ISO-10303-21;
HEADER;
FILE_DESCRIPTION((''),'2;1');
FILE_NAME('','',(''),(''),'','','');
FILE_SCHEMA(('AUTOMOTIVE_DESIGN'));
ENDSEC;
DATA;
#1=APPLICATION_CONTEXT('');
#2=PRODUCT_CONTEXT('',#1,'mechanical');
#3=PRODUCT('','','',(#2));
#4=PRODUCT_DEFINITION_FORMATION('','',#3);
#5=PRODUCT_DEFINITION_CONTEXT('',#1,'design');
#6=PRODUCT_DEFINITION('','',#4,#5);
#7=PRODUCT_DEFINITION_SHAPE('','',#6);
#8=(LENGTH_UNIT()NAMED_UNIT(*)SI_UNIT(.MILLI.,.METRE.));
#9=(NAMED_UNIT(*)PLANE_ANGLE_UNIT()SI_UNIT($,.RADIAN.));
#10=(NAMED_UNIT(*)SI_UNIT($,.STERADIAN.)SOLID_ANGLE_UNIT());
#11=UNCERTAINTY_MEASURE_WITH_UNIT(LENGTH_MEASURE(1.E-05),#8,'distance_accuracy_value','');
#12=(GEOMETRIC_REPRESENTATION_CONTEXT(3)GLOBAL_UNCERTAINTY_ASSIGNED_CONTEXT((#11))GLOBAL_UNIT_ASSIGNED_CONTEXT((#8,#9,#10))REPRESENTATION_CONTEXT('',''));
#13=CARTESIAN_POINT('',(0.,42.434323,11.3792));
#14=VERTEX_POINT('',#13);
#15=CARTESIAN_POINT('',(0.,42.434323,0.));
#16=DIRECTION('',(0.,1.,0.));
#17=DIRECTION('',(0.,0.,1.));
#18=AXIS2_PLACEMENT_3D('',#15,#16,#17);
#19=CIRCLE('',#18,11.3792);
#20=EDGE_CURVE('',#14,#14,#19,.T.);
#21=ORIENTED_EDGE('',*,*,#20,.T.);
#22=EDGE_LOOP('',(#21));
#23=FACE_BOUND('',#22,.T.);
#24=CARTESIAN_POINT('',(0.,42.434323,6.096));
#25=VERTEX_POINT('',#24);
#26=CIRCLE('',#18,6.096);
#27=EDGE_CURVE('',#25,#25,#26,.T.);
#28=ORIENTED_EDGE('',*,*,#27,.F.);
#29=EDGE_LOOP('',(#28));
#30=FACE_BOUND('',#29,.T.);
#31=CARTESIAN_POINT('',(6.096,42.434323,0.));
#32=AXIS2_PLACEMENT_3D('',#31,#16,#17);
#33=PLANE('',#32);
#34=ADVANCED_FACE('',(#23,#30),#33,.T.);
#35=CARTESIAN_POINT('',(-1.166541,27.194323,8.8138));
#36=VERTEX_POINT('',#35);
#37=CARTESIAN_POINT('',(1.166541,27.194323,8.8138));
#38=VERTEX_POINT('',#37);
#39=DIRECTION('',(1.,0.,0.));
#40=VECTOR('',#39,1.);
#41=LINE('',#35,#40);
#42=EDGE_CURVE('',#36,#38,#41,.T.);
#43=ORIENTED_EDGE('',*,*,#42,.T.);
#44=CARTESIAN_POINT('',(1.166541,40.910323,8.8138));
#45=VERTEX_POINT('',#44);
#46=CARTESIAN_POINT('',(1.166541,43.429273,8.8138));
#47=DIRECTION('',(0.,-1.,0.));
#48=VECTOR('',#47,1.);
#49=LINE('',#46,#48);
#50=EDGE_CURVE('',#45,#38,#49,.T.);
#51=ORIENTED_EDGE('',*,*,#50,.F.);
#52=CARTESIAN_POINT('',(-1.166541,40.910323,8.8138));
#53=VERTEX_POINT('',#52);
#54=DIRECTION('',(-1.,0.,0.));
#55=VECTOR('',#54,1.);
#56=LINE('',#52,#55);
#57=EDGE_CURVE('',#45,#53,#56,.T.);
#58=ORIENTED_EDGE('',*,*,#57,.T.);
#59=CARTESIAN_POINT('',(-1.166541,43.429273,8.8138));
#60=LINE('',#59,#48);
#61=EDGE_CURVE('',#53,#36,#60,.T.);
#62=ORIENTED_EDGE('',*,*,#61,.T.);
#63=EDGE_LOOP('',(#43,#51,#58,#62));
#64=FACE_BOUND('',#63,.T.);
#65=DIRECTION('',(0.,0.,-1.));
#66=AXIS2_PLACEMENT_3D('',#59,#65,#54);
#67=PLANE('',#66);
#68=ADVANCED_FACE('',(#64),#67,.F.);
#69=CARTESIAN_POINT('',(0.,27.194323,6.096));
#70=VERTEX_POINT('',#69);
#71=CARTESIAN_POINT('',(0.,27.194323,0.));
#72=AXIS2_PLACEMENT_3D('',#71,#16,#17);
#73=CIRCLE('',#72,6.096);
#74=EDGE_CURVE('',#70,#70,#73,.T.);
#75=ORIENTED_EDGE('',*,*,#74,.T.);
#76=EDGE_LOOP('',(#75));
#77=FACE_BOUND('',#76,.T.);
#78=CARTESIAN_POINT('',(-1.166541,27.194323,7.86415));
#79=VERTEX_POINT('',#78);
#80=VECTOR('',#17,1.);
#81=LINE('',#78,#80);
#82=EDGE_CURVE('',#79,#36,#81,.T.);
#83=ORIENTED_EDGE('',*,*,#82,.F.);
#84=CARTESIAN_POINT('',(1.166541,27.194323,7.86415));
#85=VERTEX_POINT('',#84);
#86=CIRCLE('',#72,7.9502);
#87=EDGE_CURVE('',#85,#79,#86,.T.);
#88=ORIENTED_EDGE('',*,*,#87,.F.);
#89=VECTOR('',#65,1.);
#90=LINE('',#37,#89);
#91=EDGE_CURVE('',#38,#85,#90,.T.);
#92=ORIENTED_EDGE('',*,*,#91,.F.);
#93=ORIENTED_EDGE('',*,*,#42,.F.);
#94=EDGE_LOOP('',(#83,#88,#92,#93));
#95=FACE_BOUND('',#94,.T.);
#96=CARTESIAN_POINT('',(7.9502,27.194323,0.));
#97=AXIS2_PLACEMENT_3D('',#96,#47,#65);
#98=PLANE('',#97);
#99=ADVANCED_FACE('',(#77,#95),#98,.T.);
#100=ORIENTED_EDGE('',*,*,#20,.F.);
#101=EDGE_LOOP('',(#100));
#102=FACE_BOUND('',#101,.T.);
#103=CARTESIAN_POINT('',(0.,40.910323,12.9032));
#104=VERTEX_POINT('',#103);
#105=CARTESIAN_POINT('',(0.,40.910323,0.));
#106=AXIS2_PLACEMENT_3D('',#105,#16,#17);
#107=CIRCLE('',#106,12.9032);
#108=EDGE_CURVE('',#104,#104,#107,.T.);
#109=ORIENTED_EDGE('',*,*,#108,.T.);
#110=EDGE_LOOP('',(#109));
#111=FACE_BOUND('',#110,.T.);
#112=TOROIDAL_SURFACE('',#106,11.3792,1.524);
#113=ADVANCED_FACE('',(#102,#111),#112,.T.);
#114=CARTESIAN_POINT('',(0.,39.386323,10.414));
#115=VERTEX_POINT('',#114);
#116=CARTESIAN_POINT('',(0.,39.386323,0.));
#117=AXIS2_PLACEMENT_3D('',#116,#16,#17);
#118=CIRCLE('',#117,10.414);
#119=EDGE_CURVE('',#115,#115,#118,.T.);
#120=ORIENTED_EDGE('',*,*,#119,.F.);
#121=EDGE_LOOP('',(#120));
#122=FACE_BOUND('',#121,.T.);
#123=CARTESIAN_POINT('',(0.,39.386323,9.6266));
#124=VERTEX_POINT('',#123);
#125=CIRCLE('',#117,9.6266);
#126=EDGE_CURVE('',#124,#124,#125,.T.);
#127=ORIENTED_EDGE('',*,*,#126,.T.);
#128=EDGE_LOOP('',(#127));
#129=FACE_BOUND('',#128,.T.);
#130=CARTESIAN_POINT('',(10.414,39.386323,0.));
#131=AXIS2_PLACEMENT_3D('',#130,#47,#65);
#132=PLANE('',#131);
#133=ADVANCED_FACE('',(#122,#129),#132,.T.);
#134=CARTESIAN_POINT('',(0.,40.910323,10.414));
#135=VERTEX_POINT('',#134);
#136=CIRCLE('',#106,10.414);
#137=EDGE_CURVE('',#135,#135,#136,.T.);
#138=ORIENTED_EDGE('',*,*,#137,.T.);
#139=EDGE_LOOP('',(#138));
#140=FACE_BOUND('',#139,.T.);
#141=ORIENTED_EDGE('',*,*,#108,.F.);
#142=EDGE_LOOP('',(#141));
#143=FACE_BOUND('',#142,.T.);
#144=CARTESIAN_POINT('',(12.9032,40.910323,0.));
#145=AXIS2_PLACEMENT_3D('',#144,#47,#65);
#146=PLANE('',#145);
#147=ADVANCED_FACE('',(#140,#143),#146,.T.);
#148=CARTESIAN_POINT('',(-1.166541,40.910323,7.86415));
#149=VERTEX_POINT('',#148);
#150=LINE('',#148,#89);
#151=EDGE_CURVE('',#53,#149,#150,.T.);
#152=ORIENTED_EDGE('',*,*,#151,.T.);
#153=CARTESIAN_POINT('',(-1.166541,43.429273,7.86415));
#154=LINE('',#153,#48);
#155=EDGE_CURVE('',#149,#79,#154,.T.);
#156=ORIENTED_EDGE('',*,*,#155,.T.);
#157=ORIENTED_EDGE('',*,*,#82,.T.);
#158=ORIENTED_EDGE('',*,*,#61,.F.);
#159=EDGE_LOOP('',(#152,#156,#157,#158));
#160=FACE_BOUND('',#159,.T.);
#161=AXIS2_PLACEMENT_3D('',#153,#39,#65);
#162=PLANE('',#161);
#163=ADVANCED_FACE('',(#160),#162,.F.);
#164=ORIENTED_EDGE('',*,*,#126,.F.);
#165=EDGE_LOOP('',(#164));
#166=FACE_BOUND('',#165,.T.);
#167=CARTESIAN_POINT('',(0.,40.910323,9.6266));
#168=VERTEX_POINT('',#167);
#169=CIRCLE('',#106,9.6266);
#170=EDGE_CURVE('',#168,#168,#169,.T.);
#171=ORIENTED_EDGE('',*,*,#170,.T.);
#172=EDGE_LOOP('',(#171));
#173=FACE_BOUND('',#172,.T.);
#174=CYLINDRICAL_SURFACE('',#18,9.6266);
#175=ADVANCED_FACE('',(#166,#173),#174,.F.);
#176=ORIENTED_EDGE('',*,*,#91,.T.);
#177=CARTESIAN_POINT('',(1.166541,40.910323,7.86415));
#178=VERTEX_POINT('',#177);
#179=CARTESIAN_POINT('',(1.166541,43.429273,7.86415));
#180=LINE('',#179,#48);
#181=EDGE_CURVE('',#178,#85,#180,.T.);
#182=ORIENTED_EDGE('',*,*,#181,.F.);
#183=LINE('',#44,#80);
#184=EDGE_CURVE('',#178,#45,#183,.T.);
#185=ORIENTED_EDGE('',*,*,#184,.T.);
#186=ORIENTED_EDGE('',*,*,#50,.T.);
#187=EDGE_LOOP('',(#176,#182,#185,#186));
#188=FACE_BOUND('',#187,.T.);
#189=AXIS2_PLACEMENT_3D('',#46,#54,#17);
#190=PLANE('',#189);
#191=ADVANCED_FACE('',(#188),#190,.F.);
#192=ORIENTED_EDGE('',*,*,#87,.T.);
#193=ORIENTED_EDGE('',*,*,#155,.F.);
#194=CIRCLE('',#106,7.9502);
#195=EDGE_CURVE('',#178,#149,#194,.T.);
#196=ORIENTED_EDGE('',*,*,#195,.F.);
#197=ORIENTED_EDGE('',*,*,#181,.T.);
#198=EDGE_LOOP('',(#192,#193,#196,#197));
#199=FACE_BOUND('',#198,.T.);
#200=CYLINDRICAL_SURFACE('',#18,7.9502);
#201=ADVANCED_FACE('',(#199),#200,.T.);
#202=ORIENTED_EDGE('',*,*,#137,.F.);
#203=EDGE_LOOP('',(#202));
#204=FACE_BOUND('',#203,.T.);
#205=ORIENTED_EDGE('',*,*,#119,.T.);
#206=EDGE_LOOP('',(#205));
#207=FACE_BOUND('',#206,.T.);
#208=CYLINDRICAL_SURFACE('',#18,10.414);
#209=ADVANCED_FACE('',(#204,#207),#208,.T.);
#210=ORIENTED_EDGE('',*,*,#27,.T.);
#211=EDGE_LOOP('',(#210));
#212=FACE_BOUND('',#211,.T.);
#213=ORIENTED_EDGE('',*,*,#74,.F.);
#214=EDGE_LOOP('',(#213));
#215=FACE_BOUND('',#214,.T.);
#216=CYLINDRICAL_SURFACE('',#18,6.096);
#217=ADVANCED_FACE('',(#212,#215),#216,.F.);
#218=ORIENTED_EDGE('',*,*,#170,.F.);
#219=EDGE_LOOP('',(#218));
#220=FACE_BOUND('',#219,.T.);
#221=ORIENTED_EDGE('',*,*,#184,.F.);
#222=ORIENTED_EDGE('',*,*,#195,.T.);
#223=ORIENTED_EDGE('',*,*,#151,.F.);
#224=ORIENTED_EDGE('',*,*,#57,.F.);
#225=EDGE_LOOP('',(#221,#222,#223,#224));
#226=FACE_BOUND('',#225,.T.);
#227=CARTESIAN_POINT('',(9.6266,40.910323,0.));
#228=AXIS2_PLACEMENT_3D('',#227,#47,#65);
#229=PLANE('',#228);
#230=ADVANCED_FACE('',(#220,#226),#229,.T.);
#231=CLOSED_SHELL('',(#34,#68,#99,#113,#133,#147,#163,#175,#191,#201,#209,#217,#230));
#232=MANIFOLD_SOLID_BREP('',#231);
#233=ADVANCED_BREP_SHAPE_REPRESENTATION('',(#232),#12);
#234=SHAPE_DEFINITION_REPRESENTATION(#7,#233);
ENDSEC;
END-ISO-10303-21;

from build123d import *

# Parameters (mm, degrees)
FILLET1_R           = 1.524
BOSS_EXTRUDE1_START = -13.716
BOSS_EXTRUDE1_DEPTH = 13.716


with BuildPart() as part:
    # Sketch1 → Base-Revolve (revolve)
    with BuildSketch(Plane.XY, mode=Mode.PRIVATE) as base_revolve_sk:
        Polygon((10.414, 39.386322837), (9.6266, 39.386322837), (9.6266, 40.910322837), (7.9502, 40.910322837), (7.9502, 27.194322837), (6.096, 27.194322837), (6.096, 42.434322837), (12.9032, 42.434322837), (12.9032, 40.910322837), (10.414, 40.910322837), align=None)
    revolve(base_revolve_sk.sketch.rotate(Axis((0, 42.434322837, 0), (0, -1, 0)), 90), axis=Axis((0, 42.434322837, 0), (0, -1, 0)))

    # Fillet1
    fillet1_edges = [part.edges().sort_by_distance(p)[0] for p in [
        (0, 42.434322837, -12.9032),
    ]]
    fillet(fillet1_edges, radius=FILLET1_R - 0.0001)  # a hair under: the kernel refuses the full size

    # Sketch3 → Boss-Extrude1 (add)
    with BuildSketch(Plane.XZ.offset(-27.194322837).offset(BOSS_EXTRUDE1_START)):
        with BuildLine():
            Line((-1.166541413, 7.864150378), (-1.166541413, 8.8138))
            Line((-1.166541413, 8.8138), (1.166541413, 8.8138))
            Line((1.166541413, 8.8138), (1.166541413, 7.864150378))
            ThreePointArc((1.166541413, 7.864150378), (0, 7.9502), (-1.166541413, 7.864150378))
        make_face()
    extrude(amount=BOSS_EXTRUDE1_DEPTH)


solid = part.part
